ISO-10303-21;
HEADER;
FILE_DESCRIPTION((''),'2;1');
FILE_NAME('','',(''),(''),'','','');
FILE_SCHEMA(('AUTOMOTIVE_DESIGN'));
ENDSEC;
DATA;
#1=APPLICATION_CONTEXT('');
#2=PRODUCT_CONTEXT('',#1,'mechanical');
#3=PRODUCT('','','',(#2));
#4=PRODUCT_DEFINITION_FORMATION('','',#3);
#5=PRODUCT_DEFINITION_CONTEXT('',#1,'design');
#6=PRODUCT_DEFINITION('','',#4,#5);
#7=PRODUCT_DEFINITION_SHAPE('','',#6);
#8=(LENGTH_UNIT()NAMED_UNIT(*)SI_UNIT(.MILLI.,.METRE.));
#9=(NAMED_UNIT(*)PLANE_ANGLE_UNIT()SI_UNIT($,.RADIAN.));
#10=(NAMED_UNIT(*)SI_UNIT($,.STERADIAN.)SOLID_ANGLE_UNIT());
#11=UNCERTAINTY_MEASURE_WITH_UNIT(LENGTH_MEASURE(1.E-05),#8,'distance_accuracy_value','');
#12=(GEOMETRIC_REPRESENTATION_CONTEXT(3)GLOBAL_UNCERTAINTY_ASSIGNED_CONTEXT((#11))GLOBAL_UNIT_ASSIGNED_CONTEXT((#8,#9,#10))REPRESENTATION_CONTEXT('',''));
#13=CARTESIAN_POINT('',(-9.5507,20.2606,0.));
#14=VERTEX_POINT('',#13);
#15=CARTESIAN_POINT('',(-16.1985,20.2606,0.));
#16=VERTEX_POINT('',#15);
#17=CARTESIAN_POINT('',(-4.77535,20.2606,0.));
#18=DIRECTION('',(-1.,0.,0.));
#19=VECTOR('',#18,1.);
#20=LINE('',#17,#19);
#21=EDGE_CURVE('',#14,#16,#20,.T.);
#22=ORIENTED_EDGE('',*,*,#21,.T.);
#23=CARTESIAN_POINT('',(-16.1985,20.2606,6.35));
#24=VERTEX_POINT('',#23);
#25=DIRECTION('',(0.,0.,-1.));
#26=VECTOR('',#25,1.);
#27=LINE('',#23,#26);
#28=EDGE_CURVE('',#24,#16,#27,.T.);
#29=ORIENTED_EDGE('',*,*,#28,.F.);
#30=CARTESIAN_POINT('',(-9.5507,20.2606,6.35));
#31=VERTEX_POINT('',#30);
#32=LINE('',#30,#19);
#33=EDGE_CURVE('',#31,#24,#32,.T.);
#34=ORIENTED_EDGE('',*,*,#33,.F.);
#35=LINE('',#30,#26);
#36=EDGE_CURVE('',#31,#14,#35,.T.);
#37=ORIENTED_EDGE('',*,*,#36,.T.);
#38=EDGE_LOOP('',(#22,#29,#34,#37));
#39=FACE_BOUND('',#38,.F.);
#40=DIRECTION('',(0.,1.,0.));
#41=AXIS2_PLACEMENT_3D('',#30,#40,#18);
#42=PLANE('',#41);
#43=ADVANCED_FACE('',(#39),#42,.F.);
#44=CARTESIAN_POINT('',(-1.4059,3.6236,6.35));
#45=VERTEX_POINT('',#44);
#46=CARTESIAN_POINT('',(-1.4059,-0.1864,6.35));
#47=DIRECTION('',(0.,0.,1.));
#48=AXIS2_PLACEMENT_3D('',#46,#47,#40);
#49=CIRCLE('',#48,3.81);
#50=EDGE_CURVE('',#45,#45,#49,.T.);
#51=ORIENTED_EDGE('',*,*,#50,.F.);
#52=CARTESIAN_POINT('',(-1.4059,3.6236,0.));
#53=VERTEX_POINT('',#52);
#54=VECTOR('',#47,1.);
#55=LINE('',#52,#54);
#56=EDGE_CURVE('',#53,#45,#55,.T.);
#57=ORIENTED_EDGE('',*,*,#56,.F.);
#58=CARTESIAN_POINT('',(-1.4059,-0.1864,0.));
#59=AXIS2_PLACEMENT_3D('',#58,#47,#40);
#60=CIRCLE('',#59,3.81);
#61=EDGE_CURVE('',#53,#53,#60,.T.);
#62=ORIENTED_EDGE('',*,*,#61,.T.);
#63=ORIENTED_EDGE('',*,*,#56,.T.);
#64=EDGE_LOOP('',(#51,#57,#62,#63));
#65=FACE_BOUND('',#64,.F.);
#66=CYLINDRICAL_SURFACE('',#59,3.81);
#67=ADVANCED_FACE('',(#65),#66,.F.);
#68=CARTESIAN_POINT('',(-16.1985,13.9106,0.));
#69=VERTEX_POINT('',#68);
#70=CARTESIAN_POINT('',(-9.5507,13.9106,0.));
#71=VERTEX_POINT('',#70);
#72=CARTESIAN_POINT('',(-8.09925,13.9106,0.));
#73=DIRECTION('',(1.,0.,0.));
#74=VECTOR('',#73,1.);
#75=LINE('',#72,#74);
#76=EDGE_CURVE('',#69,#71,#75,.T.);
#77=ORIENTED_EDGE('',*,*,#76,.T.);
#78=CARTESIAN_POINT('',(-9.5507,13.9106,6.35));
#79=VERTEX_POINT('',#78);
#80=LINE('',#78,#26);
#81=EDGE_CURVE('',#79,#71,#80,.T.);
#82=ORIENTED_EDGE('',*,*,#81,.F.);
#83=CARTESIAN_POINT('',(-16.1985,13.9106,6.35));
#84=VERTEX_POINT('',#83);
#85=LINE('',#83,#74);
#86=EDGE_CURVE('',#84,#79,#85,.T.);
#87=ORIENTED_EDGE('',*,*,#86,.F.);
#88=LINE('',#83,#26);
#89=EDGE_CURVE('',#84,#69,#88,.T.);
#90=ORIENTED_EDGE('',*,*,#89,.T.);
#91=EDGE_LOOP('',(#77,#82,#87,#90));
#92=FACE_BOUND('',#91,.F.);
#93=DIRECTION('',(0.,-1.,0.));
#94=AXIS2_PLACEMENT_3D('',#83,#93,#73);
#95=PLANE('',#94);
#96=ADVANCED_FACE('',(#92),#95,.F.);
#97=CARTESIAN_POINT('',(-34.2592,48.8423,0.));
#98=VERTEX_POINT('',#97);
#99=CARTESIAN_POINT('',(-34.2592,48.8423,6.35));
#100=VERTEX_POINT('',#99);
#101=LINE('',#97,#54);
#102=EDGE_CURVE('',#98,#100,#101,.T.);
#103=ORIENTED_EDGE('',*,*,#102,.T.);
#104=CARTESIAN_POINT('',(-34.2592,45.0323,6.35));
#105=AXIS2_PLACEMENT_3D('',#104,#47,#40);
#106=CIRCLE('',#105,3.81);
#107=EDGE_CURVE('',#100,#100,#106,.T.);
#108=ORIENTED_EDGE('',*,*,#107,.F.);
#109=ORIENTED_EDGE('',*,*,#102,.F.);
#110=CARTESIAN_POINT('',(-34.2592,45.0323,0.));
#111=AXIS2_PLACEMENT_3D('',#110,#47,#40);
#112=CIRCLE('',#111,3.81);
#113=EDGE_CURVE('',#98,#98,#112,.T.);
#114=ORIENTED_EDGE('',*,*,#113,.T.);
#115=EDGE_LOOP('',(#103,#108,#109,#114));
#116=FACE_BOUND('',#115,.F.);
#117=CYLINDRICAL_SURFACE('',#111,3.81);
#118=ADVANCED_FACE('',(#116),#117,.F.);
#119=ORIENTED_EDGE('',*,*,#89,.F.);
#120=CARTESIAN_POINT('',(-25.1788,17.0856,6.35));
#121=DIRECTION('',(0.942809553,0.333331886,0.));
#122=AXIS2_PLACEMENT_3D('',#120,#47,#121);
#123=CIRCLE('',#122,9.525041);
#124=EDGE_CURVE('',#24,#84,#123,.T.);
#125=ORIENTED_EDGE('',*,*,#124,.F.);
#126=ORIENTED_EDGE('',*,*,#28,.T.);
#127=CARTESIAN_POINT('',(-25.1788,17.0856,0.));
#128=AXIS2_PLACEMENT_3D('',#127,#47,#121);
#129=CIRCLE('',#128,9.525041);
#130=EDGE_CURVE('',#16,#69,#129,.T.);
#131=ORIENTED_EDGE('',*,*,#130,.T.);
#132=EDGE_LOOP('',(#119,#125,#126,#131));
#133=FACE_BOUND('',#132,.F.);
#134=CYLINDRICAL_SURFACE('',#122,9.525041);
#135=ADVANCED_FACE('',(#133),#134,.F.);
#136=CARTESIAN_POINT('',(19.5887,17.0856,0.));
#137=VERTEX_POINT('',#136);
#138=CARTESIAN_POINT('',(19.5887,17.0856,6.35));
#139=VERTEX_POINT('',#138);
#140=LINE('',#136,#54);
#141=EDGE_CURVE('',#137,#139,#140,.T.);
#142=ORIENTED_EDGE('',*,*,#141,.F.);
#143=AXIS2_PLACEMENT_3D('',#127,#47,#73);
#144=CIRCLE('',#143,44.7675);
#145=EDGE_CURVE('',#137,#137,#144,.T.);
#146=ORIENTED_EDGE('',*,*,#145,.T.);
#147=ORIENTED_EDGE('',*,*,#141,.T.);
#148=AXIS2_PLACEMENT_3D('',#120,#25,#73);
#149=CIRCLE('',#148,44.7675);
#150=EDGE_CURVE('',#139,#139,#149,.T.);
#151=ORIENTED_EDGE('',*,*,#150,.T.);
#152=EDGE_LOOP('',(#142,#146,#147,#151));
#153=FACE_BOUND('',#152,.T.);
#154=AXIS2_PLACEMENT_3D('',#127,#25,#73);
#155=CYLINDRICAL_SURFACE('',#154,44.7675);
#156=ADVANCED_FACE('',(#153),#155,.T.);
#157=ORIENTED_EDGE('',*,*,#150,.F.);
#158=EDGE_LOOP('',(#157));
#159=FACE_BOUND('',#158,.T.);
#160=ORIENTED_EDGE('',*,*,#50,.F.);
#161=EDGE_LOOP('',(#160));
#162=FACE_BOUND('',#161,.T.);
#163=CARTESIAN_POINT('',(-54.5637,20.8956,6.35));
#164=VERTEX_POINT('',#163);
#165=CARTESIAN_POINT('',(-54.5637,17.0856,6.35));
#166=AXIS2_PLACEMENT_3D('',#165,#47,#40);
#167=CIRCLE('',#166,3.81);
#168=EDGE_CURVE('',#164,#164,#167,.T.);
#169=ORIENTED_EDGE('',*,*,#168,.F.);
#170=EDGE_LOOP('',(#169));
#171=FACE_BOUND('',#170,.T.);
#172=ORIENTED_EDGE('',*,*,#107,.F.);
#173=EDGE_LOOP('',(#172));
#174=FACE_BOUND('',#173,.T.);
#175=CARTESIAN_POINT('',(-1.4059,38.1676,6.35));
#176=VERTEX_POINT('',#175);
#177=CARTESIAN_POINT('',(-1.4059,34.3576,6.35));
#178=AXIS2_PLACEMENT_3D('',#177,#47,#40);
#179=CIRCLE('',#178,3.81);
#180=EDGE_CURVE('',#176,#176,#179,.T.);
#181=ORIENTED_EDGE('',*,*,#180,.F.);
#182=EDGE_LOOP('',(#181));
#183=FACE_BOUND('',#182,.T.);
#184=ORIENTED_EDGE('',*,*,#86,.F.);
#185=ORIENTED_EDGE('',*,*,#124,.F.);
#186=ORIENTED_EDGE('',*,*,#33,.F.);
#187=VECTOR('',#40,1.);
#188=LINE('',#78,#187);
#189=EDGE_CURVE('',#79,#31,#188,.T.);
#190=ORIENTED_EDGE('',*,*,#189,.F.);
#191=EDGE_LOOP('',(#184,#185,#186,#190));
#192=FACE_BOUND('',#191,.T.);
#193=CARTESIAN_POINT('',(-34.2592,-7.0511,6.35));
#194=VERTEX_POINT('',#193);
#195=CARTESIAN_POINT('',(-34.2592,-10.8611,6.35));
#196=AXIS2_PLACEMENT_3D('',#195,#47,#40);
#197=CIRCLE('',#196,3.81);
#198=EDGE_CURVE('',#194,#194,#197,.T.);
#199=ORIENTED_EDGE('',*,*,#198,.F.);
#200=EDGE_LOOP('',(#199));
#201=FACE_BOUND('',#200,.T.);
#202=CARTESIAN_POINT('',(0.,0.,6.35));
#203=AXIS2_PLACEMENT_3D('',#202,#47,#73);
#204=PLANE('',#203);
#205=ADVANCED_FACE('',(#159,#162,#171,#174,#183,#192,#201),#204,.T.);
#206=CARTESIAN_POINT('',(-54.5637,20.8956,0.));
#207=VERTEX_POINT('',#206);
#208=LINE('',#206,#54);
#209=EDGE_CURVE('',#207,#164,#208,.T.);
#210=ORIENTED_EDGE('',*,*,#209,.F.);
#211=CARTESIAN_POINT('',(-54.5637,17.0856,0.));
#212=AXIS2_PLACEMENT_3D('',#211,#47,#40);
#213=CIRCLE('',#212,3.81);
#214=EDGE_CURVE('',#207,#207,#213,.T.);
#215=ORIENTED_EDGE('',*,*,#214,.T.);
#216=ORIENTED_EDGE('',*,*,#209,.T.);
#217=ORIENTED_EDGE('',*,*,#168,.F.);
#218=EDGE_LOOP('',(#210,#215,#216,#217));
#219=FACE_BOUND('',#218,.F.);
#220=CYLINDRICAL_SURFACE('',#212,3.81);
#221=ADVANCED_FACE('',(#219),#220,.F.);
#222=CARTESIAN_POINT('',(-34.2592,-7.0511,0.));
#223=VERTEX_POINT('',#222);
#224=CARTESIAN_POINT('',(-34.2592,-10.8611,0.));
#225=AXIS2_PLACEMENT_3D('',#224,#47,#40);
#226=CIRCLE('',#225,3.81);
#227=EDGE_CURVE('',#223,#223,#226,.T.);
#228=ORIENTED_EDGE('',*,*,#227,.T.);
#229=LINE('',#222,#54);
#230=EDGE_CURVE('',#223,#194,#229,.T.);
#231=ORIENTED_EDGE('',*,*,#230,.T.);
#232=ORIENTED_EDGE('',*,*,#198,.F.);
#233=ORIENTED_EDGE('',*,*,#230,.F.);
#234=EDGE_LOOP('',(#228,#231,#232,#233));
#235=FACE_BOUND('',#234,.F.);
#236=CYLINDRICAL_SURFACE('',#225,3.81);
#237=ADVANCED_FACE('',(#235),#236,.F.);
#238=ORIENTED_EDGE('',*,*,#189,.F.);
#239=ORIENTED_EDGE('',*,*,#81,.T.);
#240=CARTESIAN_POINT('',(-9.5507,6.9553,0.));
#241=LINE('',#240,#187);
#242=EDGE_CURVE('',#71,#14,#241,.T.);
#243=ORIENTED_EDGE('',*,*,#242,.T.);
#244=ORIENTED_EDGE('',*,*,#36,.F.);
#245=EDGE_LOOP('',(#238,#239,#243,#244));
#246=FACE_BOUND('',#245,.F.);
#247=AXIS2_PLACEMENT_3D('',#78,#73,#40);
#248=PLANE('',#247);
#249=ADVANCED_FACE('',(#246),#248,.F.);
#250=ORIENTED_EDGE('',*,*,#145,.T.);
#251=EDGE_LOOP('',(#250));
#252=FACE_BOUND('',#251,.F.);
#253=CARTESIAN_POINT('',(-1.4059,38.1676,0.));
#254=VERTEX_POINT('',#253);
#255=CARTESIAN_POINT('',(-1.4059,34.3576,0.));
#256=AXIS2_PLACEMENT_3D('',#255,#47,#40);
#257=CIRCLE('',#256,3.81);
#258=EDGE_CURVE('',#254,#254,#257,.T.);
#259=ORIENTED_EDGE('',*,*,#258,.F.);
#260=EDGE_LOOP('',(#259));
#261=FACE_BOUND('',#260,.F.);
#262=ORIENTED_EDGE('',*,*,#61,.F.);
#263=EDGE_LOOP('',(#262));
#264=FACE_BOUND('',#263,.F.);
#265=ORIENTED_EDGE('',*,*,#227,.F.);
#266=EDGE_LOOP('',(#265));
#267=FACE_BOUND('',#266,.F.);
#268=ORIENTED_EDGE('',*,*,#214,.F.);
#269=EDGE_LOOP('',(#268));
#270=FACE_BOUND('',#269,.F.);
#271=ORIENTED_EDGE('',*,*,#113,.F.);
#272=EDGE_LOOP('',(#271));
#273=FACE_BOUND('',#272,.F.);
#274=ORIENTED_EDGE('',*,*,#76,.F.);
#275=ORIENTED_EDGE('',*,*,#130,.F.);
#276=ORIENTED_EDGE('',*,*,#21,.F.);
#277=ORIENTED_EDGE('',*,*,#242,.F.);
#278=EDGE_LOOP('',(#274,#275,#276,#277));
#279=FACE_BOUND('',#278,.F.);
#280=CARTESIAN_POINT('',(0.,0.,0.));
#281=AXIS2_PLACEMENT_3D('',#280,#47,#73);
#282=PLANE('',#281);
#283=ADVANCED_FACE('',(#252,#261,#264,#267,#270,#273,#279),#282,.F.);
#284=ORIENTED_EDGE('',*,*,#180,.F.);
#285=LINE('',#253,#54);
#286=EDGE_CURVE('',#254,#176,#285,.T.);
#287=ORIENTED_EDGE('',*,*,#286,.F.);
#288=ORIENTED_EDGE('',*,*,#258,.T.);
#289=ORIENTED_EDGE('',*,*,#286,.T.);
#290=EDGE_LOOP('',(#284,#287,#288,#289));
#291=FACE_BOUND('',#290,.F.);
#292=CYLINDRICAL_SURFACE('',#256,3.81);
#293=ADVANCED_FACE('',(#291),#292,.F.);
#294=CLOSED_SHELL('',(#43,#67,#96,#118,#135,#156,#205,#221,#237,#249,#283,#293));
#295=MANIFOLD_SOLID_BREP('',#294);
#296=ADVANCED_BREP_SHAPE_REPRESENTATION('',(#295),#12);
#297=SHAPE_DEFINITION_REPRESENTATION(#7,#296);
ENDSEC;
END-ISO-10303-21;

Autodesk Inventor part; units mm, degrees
ref_plane "YZ Plane" through (0, 0, 0) normal (1, 0, 0) x (0, 1, 0)
ref_plane "XZ Plane" through (0, 0, 0) normal (0, 1, 0) x (-1, 0, 0)
ref_plane "XY Plane" through (0, 0, 0) normal (0, 0, 1) x (1, 0, 0)
sketch "Sketch1" plane through (0, 0, 0) normal (0, 0, 1) x (1, 0, 0)
  line L0 (-25.1788, 61.8531) -> (-25.1788, 68.2031)
  line L1 (-13.5921, 60.3277) -> (-11.9486, 66.4613)
  line L2 (-2.7951, 55.8554) -> (0.3799, 61.3547)
  line L3 (6.4766, 48.741) -> (10.9667, 53.2312)
  line L4 (13.591, 39.4694) -> (19.0902, 42.6444)
  line L5 (18.0633, 28.6723) -> (24.1969, 30.3158)
  line L6 (19.5887, 17.0856) -> (25.9387, 17.0856)
  line L7 (18.0633, 5.4989) -> (24.1969, 3.8554)
  line L8 (13.591, -5.2981) -> (19.0902, -8.4731)
  line L9 (6.4766, -14.5698) -> (10.9667, -19.0599)
  line L10 (-2.7951, -21.6842) -> (0.3799, -27.1834)
  line L11 (-13.5921, -26.1565) -> (-11.9486, -32.2901)
  line L12 (-25.1788, -27.6819) -> (-25.1788, -34.0319)
  line L13 (-36.7655, -26.1565) -> (-38.409, -32.2901)
  line L14 (-47.5626, -21.6842) -> (-50.7376, -27.1834)
  line L15 (-56.8342, -14.5698) -> (-61.3243, -19.0599)
  line L16 (-63.9486, -5.2981) -> (-69.4479, -8.4731)
  line L17 (-68.4209, 5.4989) -> (-74.5545, 3.8554)
  line L18 (-69.9463, 17.0856) -> (-76.2963, 17.0856)
  line L19 (-68.4209, 28.6723) -> (-74.5545, 30.3158)
  line L20 (-63.9486, 39.4694) -> (-69.4479, 42.6444)
  line L21 (-56.8342, 48.741) -> (-61.3243, 53.2312)
  line L22 (-47.5626, 55.8554) -> (-50.7376, 61.3547)
  line L23 (-36.7655, 60.3277) -> (-38.409, 66.4613)
  arc A0 (-38.409, 66.4613) -> (-25.1788, 68.2031) centre (-31.8994, 68.1336) ccw
  arc A1 (-25.1788, 68.2031) -> (-11.9486, 66.4613) centre (-18.4582, 68.1336) ccw
  arc A2 (-11.9486, 66.4613) -> (0.3799, 61.3547) centre (-5.475, 64.6547) ccw
  arc A3 (0.3799, 61.3547) -> (10.9667, 53.2312) centre (6.1654, 57.9342) ccw
  arc A4 (10.9667, 53.2312) -> (19.0902, 42.6444) centre (15.6697, 48.4298) ccw
  arc A5 (19.0902, 42.6444) -> (24.1969, 30.3158) centre (22.3903, 36.7894) ccw
  arc A6 (24.1969, 30.3158) -> (25.9387, 17.0856) centre (25.8692, 23.8062) ccw
  arc A7 (25.9387, 17.0856) -> (24.1969, 3.8554) centre (25.8692, 10.365) ccw
  arc A8 (24.1969, 3.8554) -> (19.0902, -8.4731) centre (22.3903, -2.6182) ccw
  arc A9 (19.0902, -8.4731) -> (10.9667, -19.0599) centre (15.6697, -14.2586) ccw
  arc A10 (10.9667, -19.0599) -> (0.3799, -27.1834) centre (6.1654, -23.7629) ccw
  arc A11 (0.3799, -27.1834) -> (-11.9486, -32.2901) centre (-5.475, -30.4835) ccw
  arc A12 (-11.9486, -32.2901) -> (-25.1788, -34.0319) centre (-18.4582, -33.9623) ccw
  arc A13 (-25.1788, -34.0319) -> (-38.409, -32.2901) centre (-31.8994, -33.9623) ccw
  arc A14 (-38.409, -32.2901) -> (-50.7376, -27.1834) centre (-44.8826, -30.4835) ccw
  arc A15 (-50.7376, -27.1834) -> (-61.3243, -19.0599) centre (-56.523, -23.7629) ccw
  arc A16 (-61.3243, -19.0599) -> (-69.4479, -8.4731) centre (-66.0273, -14.2586) ccw
  arc A17 (-69.4479, -8.4731) -> (-74.5545, 3.8554) centre (-72.7479, -2.6182) ccw
  arc A18 (-74.5545, 3.8554) -> (-76.2963, 17.0856) centre (-76.2268, 10.365) ccw
  arc A19 (-76.2963, 17.0856) -> (-74.5545, 30.3158) centre (-76.2268, 23.8062) ccw
  arc A20 (-74.5545, 30.3158) -> (-69.4479, 42.6444) centre (-72.7479, 36.7894) ccw
  arc A21 (-69.4479, 42.6444) -> (-61.3243, 53.2312) centre (-66.0273, 48.4298) ccw
  arc A22 (-61.3243, 53.2312) -> (-50.7376, 61.3547) centre (-56.523, 57.9342) ccw
  arc A23 (-50.7376, 61.3547) -> (-38.409, 66.4613) centre (-44.8826, 64.6547) ccw
  circle A24 centre (-25.1788, 17.0856) radius 44.7675
  point P0 (0, 0)
  dimension "d36" = 89.535
  dimension "d8" = 360
extrude "Extrusion1" add sketch "Sketch1" along normal blind 6.35 contours A24
sketch "Sketch2" plane through (-25.1788, 17.0856, 0) normal (0, 0, -1) x (-1, 0, 0)
  circle A0 centre (-23.7729, 17.272) radius 3.81
  circle A1 centre (0, 0) radius 44.7675 projected
  circle A2 centre (9.0804, 27.9467) radius 3.81
  circle A3 centre (29.3849, 0) radius 3.81
  circle A4 centre (9.0804, -27.9467) radius 3.81
  circle A5 centre (-23.7729, -17.272) radius 3.81
  point P0 (-25.1788, -17.0856)
  dimension "d15" = 360
  dimension "d17" = 17.272
  dimension "d19" = 0
  dimension "d20" = 7.62
hole "Hole1" at (-1.4059, 34.3576, 0) at (-1.4059, -0.1864, 0) at (-34.2592, 45.0323, 0) at (-34.2592, -10.8611, 0) at (-54.5637, 17.0856, 0) direction (0, 0, 1) diameter 7.62 end through all
sketch "Sketch3" plane through (-25.1788, 17.0856, 0) normal (0, 0, -1) x (-1, 0, 0)
  point P0 (-25.1788, -17.0856)
sketch "Sketch4" plane through (-25.1788, 17.0856, 0) normal (0, 0, -1) x (-1, 0, 0)
  point P0 (-25.1788, -17.0856)
sketch "Sketch5" plane through (-25.1788, 17.0856, 6.35) normal (0, 0, 1) x (1, 0, 0)
  arc A0 (8.9803, 3.175) -> (8.9803, -3.175) centre (0, 0) ccw
  line L0 (15.6281, 3.175) -> (8.9803, 3.175)
  line L1 (8.9803, -3.175) -> (15.6281, -3.175)
  line L2 (15.6281, -3.175) -> (15.6281, 3.175)
  circle A1 centre (0, 0) radius 44.7675 projected
  point P0 (25.1788, -17.0856)
  dimension "d28" = 19.05
  dimension "d40" = 0
  dimension "d41" = 6.35
  dimension "d42" = 3.175
  dimension "d43" = 0
  dimension "d46" = 15.6281
extrude "Extrusion2" cut sketch "Sketch5" against normal through all contours L0 L2 L1 A0
properties part number "Seeder Motor Gear"
